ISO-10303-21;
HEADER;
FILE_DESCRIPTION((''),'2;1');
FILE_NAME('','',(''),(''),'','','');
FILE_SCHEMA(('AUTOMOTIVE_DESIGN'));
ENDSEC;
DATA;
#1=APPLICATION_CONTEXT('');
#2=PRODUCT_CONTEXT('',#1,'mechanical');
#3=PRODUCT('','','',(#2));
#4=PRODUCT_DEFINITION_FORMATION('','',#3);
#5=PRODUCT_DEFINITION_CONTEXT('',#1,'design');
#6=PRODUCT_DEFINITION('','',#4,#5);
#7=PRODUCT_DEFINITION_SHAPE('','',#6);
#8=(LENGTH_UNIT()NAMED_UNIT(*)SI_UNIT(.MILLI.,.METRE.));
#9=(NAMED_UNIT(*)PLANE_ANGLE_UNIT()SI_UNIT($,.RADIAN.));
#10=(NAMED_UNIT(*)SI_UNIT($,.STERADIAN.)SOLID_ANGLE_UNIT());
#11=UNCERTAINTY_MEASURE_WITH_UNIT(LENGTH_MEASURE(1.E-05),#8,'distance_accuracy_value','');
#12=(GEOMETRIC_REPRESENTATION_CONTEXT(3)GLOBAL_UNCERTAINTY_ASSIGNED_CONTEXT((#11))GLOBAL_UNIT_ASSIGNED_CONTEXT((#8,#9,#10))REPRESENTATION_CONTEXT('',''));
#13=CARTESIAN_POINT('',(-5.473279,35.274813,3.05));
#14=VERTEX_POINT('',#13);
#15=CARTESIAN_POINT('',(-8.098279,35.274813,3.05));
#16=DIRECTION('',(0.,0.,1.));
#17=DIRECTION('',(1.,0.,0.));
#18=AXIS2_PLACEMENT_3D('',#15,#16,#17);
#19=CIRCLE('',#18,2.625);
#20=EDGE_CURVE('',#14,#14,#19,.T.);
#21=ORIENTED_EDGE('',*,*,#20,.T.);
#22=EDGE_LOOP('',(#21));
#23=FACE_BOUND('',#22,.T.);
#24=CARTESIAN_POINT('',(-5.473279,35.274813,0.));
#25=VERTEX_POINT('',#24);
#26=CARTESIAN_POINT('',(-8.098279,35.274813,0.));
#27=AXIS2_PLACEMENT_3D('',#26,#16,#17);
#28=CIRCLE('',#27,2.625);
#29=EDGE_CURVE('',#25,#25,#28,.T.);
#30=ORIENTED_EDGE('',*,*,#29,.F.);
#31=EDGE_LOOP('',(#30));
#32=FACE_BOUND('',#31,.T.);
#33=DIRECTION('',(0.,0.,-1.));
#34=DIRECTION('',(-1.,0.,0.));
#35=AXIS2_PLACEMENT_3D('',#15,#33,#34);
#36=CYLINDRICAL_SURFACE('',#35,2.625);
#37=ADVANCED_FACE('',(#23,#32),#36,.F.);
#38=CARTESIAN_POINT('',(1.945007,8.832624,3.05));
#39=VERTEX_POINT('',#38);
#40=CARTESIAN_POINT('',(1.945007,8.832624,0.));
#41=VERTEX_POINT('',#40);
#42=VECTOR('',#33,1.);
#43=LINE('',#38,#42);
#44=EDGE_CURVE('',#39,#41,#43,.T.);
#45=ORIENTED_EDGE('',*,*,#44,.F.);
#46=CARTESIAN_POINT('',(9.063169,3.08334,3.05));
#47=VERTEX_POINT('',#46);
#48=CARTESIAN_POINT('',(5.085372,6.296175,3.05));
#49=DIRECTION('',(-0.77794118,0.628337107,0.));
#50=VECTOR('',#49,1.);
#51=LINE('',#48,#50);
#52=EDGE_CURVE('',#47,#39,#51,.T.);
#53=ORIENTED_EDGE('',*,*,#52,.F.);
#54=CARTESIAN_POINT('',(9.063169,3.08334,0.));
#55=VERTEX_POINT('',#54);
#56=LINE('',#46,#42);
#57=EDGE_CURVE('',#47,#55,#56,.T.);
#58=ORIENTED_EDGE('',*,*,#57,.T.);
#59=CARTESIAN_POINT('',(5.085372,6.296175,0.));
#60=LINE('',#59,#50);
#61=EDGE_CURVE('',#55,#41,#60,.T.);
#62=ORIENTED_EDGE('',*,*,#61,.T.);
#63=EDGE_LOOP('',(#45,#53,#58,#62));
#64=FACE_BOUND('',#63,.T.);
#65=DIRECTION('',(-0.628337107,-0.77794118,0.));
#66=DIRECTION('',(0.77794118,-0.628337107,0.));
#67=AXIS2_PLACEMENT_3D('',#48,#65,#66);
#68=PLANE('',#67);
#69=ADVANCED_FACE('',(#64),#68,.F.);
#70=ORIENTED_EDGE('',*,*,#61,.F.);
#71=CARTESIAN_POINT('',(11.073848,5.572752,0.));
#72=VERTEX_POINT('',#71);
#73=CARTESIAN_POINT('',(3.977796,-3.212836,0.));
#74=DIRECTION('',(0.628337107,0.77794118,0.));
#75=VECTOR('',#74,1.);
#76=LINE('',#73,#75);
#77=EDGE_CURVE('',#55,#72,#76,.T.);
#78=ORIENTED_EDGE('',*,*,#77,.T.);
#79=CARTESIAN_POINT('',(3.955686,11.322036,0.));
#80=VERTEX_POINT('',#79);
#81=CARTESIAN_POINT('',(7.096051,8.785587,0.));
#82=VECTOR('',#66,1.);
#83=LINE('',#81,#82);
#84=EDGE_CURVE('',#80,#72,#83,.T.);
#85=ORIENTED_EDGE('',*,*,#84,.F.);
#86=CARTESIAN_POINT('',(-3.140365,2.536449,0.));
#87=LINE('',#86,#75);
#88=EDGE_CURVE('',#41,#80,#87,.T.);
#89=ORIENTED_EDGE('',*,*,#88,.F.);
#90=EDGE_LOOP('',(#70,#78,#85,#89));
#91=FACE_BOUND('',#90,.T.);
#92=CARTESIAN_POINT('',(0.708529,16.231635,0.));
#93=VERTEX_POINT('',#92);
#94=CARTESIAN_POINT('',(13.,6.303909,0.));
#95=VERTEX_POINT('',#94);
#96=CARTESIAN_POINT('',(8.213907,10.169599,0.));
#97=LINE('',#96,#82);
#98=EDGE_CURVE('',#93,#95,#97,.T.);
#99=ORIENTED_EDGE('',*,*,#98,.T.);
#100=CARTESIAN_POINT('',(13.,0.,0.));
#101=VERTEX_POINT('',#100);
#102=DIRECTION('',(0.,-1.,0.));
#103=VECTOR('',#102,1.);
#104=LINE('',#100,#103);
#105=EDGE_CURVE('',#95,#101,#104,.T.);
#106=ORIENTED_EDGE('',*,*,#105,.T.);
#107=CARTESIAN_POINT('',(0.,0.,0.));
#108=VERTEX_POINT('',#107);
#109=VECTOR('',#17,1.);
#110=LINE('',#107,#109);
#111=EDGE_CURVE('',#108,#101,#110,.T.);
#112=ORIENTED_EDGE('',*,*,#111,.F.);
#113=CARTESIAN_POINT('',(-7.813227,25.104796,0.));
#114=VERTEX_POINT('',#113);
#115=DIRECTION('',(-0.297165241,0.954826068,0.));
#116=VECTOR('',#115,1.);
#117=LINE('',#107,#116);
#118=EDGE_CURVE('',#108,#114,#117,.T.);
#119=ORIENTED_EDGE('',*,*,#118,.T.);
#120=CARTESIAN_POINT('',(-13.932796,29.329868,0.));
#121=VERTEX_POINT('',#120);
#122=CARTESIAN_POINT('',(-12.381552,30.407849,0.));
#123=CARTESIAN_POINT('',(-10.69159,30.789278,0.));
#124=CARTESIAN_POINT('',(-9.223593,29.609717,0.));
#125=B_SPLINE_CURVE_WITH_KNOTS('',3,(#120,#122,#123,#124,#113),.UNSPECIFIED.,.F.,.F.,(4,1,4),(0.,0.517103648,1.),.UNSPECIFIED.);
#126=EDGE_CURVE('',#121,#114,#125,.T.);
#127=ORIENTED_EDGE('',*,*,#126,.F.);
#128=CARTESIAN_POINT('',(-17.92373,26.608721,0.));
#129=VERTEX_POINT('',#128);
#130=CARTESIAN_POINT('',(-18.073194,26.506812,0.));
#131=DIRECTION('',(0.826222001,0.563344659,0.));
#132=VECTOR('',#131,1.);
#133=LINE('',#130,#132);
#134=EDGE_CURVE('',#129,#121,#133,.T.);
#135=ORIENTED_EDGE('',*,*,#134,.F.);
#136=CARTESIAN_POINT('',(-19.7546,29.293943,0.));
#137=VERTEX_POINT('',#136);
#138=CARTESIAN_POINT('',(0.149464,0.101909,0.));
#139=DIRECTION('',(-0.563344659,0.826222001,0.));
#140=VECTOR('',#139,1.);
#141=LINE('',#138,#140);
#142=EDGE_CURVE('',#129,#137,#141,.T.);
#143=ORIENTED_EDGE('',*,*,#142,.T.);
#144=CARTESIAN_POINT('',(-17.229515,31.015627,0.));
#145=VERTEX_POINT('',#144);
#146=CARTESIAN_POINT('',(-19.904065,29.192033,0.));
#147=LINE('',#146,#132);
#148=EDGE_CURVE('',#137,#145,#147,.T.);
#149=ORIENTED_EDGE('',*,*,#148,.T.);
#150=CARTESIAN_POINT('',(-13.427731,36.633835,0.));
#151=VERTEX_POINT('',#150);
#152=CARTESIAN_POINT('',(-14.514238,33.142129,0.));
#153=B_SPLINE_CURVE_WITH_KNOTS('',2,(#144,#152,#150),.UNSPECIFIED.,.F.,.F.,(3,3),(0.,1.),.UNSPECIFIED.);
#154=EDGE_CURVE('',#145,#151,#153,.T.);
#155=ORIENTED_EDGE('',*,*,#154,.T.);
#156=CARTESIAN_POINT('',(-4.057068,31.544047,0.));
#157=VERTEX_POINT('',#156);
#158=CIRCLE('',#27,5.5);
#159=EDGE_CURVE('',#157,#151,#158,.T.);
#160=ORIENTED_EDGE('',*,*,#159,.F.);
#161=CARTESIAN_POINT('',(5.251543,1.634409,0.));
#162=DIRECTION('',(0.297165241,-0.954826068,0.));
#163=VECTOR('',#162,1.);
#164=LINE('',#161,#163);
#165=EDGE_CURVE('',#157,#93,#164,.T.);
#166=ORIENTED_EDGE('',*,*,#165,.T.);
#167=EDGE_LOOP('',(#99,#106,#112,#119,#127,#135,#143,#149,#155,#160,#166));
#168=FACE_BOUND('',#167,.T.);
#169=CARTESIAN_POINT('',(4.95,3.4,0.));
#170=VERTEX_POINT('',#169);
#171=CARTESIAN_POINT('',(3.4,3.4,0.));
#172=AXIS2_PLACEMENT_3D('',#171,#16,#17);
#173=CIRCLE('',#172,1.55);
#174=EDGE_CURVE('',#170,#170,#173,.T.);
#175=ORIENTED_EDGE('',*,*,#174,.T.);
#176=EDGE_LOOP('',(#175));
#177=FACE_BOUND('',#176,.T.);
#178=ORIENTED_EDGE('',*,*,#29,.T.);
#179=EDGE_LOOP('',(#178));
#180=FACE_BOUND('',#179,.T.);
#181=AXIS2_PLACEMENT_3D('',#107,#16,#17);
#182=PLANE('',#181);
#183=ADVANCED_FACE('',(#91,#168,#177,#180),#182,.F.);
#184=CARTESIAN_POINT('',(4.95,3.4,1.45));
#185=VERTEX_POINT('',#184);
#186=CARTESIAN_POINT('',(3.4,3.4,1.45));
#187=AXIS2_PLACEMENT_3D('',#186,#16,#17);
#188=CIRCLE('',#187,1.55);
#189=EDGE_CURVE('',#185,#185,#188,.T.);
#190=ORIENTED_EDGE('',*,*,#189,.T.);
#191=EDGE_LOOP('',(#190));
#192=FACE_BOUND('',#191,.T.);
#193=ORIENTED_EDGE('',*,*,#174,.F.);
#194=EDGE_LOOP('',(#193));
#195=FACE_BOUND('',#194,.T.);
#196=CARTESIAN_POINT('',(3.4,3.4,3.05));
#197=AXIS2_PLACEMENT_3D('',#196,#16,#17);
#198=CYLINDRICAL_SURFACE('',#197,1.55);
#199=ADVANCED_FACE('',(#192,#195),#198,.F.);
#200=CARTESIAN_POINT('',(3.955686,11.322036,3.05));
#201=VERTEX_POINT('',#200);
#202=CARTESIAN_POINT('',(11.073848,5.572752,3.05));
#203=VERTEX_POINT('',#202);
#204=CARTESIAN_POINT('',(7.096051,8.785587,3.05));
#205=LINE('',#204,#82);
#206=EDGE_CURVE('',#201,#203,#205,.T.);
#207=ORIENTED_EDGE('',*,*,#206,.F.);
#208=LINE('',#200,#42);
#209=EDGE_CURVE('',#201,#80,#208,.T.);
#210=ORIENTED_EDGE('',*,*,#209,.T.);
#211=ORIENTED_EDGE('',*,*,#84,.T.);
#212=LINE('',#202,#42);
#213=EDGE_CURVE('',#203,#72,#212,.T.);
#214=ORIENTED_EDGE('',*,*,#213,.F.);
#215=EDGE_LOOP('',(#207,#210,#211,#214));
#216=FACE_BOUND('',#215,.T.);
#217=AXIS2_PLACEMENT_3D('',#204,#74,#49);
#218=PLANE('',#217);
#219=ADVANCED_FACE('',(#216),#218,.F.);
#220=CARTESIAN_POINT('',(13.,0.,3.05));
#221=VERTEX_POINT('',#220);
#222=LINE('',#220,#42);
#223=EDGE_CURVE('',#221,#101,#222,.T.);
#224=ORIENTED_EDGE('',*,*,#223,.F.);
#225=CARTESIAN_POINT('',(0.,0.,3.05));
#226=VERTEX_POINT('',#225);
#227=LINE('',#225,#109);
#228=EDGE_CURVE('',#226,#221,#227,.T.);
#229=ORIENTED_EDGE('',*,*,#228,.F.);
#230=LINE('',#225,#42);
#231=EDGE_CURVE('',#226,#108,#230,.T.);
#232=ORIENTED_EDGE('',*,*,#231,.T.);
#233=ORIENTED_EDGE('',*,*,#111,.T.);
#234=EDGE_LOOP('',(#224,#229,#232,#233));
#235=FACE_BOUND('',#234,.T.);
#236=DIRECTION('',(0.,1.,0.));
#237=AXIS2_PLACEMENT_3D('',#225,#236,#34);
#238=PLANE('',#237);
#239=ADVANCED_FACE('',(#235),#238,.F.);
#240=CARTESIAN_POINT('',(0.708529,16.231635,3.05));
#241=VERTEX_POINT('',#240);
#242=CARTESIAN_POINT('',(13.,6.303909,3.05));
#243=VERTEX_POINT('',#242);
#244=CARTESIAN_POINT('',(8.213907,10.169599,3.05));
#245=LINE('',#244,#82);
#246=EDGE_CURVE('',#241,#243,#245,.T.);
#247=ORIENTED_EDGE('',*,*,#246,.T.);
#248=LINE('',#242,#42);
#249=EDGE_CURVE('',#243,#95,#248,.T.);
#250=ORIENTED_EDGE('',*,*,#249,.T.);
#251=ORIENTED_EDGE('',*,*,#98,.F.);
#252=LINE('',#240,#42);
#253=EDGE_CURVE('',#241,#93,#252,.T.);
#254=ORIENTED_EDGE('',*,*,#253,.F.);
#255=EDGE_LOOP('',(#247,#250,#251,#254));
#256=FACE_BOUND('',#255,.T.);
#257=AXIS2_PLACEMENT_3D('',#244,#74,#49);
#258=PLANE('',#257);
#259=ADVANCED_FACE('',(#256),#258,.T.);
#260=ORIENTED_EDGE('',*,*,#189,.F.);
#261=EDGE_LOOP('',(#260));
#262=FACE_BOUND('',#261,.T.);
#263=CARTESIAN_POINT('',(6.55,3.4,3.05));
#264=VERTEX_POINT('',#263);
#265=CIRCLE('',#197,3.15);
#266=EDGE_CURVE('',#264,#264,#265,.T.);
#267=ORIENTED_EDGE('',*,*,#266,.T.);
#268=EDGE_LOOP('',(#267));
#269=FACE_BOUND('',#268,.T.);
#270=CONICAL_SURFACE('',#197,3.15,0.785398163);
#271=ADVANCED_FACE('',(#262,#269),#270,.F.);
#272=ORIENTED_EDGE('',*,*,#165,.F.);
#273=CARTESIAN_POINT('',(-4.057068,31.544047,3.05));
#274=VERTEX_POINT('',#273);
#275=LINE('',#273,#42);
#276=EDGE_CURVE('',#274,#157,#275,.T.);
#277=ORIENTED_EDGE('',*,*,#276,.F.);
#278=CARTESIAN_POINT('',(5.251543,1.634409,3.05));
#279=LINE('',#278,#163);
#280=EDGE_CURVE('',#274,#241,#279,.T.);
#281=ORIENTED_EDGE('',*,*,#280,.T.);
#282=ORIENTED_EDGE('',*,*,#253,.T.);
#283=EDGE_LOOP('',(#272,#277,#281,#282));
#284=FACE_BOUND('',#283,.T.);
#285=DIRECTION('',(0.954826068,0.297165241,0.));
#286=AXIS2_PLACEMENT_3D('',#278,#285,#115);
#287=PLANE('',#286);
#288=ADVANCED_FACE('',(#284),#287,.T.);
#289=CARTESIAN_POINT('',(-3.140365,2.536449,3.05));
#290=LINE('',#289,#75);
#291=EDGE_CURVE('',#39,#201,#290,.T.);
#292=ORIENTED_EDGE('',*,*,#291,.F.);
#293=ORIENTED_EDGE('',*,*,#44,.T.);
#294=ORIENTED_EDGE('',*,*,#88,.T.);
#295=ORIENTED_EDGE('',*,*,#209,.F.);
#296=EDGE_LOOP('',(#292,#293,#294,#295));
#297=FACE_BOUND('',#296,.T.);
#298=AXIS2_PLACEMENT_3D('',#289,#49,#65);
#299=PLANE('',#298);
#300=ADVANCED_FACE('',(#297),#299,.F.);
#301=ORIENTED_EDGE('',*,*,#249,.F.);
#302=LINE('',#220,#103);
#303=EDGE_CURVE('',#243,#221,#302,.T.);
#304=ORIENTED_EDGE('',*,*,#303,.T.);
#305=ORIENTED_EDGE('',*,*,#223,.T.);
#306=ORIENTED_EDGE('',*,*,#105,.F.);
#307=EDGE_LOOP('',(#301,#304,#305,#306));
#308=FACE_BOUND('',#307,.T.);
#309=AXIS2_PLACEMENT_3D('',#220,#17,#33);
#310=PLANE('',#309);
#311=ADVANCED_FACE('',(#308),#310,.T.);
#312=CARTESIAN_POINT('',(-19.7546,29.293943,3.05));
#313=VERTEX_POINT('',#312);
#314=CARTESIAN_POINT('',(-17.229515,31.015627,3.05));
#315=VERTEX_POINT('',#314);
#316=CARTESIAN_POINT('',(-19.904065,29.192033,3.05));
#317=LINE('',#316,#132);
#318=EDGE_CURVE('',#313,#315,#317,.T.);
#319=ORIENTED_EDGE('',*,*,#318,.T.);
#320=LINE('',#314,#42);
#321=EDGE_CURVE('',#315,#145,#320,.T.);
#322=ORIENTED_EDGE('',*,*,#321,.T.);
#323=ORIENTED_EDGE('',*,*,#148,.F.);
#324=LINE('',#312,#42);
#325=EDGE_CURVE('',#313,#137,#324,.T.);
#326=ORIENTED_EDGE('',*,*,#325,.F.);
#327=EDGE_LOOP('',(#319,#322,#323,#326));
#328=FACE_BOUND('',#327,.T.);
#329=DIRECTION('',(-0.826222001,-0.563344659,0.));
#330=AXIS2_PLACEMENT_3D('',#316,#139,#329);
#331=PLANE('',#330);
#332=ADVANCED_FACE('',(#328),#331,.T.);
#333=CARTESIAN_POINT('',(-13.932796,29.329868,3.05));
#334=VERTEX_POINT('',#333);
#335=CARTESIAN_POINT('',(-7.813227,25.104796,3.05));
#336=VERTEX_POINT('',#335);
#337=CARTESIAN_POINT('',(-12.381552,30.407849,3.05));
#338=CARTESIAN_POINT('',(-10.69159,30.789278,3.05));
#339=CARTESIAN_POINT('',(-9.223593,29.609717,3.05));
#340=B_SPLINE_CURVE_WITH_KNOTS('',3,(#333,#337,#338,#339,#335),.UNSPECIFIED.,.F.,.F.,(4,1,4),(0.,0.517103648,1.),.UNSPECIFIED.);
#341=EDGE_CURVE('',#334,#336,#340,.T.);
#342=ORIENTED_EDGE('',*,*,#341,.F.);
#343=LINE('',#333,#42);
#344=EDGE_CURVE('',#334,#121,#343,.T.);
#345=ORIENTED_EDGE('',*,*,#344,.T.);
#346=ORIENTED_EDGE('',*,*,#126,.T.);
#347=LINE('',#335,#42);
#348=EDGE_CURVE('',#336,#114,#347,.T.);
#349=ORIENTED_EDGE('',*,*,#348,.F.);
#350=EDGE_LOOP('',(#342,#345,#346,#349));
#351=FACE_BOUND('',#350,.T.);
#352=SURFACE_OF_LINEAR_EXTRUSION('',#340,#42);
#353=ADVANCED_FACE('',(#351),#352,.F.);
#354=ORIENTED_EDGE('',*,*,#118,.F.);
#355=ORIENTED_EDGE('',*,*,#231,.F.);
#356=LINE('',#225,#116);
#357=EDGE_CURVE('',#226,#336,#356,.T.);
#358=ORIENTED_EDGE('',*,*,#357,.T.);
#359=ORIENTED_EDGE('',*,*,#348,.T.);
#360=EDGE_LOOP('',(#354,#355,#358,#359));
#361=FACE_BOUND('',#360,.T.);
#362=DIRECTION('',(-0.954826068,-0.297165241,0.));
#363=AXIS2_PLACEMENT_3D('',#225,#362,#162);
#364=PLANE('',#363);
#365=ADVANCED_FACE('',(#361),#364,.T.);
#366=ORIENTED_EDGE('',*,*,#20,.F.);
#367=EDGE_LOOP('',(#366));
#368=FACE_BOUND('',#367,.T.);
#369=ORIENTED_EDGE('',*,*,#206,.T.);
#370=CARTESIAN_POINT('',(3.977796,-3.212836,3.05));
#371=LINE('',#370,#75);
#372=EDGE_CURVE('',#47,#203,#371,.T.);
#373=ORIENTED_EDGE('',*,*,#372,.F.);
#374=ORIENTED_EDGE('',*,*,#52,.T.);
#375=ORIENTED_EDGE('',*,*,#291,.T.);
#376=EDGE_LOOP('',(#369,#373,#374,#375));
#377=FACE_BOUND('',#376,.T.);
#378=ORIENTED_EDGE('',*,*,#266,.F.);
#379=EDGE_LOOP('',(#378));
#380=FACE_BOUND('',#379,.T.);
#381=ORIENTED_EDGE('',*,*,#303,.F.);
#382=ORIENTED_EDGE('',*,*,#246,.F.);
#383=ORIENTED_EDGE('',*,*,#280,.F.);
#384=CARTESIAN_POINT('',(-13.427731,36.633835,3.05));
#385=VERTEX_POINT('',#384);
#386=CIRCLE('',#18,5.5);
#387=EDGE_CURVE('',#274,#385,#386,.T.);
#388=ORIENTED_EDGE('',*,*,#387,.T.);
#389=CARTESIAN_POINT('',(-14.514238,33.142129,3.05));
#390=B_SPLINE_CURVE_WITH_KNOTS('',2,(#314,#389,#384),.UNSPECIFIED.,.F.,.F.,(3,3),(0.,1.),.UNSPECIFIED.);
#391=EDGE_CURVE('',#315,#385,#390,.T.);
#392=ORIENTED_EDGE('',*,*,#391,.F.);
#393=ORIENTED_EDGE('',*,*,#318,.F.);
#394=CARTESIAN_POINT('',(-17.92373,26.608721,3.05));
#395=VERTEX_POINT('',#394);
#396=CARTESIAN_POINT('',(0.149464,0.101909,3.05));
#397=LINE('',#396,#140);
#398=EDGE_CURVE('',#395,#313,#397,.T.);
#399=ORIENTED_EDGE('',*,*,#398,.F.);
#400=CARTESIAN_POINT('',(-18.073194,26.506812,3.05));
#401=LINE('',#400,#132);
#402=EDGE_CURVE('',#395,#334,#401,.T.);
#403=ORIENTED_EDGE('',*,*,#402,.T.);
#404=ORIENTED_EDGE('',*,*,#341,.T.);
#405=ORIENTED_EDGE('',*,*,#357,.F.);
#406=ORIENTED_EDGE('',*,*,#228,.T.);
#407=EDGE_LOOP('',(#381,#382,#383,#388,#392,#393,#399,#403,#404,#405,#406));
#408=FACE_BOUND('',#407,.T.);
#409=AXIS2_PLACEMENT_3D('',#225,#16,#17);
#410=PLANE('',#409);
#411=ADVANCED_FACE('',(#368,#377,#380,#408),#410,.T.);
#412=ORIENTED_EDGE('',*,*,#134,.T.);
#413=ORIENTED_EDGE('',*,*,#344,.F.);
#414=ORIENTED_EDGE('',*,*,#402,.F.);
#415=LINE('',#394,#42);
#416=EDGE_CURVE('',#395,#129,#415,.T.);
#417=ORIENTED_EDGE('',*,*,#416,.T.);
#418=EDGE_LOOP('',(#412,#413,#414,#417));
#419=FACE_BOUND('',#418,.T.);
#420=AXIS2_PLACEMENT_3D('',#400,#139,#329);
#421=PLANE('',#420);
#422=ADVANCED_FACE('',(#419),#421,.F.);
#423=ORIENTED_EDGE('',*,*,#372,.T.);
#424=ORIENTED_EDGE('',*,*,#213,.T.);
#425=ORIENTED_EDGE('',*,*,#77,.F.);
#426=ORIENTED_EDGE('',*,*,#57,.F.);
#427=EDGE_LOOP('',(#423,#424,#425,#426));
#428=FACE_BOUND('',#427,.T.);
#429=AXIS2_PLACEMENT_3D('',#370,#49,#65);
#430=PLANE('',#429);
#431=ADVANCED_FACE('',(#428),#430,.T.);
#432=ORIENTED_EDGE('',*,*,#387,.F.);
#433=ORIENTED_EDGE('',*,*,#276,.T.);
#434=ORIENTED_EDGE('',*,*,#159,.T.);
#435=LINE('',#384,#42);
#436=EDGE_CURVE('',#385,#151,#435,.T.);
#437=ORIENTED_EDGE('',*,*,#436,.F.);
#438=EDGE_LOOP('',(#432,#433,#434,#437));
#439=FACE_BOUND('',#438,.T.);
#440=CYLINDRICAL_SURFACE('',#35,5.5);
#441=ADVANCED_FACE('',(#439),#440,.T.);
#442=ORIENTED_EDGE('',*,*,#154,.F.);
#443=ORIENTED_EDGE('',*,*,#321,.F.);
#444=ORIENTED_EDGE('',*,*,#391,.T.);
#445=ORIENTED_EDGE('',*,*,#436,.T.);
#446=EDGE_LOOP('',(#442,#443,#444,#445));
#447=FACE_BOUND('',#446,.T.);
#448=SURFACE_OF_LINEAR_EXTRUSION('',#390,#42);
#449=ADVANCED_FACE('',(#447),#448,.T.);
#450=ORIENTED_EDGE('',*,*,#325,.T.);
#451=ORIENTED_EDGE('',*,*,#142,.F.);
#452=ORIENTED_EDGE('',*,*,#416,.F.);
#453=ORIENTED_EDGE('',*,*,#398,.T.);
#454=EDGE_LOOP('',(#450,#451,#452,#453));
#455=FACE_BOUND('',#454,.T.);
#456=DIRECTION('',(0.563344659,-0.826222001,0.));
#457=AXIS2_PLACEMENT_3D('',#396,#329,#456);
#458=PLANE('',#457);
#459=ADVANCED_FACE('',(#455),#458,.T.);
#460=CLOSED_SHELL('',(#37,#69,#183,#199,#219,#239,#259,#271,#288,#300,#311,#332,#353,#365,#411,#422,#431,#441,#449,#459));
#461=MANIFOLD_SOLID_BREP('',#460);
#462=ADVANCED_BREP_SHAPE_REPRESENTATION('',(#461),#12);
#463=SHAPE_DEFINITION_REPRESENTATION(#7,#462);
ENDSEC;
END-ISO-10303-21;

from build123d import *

# Parameters (mm, degrees)
SKETCH1_R           = 1.5
SKETCH1_R_2         = 2.625
BOSS_EXTRUDE1_DEPTH = 3.05


with BuildPart() as part:
    # Sketch1 → Boss-Extrude1 (new body)
    with BuildSketch(Plane.XY):
        with BuildLine():
            Line((-7.813226831, 25.104795624), (0, 0))
            Line((0, 0), (13, 0))
            Line((13, 0), (13, 6.303908615))
            Line((13, 6.303908615), (0.708529353, 16.231634907))
            Line((0.708529353, 16.231634907), (-4.057068102, 31.544047144))
            ThreePointArc((-4.057068102, 31.544047144), (-5.473136356, 40.107888765), (-13.427731373, 36.633834833))
            add(Edge.make_bspline(
                [(-17.229515242, 31.01562696), (-14.514237852, 33.142129435), (-13.427731373, 36.633834833)],
                knots=[0, 0, 0, 1, 1, 1], degree=2))
            Line((-17.229515242, 31.01562696), (-19.754600441, 29.293942889))
            Line((-19.754600441, 29.293942889), (-17.9237303, 26.608721385))
            Line((-17.9237303, 26.608721385), (-13.932796466, 29.329868067))
            add(Edge.make_bspline(
                [(-13.932796466, 29.329868067), (-12.381551692, 30.407849096), (-10.691589638, 30.789278346), (-9.223592818, 29.609717336), (-7.813226831, 25.104795624)],
                knots=[0, 0, 0, 0, 0.517103648, 1, 1, 1, 1], degree=3))
        make_face()
        with Locations((3.4, 3.4)):
            Circle(SKETCH1_R, mode=Mode.SUBTRACT)
        Polygon((11.073847559, 5.572751724), (9.110294099, 3.141685535), (9.063168816, 3.083339947), (1.945007017, 8.832624477), (3.95568576, 11.322036253), align=None, mode=Mode.SUBTRACT)
        with Locations((-8.098279353, 35.2748127)):
            Circle(SKETCH1_R_2, mode=Mode.SUBTRACT)
    extrude(amount=BOSS_EXTRUDE1_DEPTH)

    # Sketch3 → CSK for M3 Flat Head Machine Screw1 (revolve, cut)
    with BuildSketch(Plane(origin=(3.4, 3.4, 3.05), x_dir=(0, -1, 0), z_dir=(1, 0, 0))):
        Polygon((0, 0), (0, 3.05), (1.55, 3.05), (1.55, 1.6), (3.15, 0), align=None)
    revolve(axis=Axis((3.4, 3.4, 9.4), (0, 0, -1)), mode=Mode.SUBTRACT)


solid = part.part
